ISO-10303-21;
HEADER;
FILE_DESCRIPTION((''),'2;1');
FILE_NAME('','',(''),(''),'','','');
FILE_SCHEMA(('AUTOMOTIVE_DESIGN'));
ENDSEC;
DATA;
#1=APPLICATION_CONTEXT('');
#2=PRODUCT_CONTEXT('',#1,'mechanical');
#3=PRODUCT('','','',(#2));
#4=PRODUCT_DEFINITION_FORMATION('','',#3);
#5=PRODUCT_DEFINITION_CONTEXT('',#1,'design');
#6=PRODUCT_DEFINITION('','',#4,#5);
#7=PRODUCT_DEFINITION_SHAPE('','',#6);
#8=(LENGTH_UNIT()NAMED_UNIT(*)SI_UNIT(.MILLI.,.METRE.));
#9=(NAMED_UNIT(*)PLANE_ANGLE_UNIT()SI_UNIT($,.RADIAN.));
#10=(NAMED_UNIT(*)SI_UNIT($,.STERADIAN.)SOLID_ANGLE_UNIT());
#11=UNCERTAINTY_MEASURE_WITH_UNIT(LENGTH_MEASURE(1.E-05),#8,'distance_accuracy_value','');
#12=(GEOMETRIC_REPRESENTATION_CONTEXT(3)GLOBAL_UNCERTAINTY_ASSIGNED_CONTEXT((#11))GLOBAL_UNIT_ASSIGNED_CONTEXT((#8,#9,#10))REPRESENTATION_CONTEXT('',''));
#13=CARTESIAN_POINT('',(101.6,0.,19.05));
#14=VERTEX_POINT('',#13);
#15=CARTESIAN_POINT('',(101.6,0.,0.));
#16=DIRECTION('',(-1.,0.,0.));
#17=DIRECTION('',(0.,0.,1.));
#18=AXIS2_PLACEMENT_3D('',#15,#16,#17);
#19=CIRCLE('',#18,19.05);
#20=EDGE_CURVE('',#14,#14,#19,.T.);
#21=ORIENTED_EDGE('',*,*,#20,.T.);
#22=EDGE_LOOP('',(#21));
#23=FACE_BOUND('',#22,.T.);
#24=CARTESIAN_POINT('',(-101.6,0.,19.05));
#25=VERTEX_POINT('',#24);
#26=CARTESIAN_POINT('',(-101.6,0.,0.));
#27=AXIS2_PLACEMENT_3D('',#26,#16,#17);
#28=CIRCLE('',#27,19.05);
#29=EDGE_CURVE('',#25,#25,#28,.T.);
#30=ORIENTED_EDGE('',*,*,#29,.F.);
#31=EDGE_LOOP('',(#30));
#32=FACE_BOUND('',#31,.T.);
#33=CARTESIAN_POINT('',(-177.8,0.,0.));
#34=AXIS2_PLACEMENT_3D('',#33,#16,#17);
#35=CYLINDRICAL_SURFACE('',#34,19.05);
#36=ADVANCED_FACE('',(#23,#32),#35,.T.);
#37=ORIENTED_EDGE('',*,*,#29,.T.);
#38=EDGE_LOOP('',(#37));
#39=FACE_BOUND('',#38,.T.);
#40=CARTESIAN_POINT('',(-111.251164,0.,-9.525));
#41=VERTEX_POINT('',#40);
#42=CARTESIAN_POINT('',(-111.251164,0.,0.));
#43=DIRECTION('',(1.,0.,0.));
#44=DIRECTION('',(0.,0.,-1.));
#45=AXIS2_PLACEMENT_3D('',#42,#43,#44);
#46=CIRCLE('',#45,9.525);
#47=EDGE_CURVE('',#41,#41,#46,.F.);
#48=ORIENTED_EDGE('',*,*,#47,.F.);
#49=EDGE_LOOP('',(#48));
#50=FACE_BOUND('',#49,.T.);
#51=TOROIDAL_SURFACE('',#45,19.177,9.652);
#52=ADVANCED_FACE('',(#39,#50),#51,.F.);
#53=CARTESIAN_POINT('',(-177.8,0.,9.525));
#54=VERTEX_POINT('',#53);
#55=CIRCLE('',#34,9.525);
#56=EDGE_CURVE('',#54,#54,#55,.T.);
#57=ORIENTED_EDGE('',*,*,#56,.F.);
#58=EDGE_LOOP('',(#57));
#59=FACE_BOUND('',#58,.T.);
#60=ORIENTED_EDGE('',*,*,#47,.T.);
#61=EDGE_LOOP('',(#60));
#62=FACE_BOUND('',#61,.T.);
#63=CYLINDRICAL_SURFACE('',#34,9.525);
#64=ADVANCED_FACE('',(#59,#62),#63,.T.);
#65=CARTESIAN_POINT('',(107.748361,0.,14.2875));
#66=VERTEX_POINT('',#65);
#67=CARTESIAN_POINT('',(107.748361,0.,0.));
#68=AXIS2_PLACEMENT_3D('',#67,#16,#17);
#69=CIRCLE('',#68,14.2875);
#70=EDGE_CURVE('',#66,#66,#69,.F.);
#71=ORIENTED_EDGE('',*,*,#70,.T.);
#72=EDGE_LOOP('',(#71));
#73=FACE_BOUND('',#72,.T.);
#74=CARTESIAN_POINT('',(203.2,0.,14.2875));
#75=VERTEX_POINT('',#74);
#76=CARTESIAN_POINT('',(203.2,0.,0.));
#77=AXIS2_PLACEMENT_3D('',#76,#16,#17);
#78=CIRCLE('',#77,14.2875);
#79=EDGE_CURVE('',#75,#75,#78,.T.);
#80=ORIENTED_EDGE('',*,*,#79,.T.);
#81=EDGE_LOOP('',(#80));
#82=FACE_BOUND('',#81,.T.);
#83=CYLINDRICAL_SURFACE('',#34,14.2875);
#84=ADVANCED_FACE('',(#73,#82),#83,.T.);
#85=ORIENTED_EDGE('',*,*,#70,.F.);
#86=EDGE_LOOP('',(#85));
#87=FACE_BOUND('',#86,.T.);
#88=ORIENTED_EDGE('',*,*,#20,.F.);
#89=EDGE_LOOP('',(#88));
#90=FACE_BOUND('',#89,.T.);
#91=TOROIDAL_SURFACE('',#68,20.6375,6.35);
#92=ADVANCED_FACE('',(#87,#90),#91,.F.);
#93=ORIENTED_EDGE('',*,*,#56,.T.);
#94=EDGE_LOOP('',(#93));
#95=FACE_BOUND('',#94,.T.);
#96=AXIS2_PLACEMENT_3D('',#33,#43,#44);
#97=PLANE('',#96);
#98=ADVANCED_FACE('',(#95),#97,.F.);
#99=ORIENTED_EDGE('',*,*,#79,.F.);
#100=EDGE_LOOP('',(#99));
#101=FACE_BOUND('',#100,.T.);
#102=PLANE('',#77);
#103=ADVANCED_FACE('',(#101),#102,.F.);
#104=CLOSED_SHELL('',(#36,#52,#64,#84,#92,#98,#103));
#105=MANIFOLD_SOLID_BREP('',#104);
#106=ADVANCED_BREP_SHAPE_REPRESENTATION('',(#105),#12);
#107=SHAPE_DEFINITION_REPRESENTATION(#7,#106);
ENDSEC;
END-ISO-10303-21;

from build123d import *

# Parameters (mm, degrees)
FILLET1_R = 9.652
FILLET2_R = 6.35


with BuildPart() as part:
    # Sketch1 → Revolve3 (revolve)
    with BuildSketch(Plane.XY, mode=Mode.PRIVATE) as revolve3_sk:
        Polygon((-101.6, 19.05), (101.6, 19.05), (101.6, 14.2875), (203.2, 14.2875), (203.2, 0), (-177.8, 0), (-177.8, 9.525), (-101.6, 9.525), align=None)
    revolve(revolve3_sk.sketch.rotate(Axis((-177.8, 0, 0), (1, 0, 0)), 90), axis=Axis((-177.8, 0, 0), (1, 0, 0)))

    # Fillet1
    # the kernel refuses this fillet: 9.652 mm, written as the material it adds along each edge
    with BuildSketch(Plane(origin=(-101.6, 0, 0), x_dir=(0, 0, 1), z_dir=(0, 1, 0))) as fillet1_piece_1_section:
        with BuildLine():
            CenterArc((9.525 + FILLET1_R, -FILLET1_R), FILLET1_R, 90, 90)
            Line((9.525 + FILLET1_R, 0), (9.525, 0))
            Line((9.525, 0), (9.525, -FILLET1_R))
        make_face()
    fillet1_piece_1 = revolve(axis=Axis((-101.6, 0, 0), (1, 0, 0)), mode=Mode.PRIVATE)
    fillet1_piece_1 = fillet1_piece_1 & Plane(origin=(-104.387487572, 0, 0), x_dir=(0, 0, 1), z_dir=(1, 0, 0)) * Cylinder(19.05, 77, mode=Mode.PRIVATE)
    add(fillet1_piece_1)

    # Fillet2
    # the kernel refuses this fillet: 6.35 mm, written as the material it adds along each edge
    with BuildSketch(Plane(origin=(101.6, 0, 0), x_dir=(0, 0, 1), z_dir=(0, 1, 0))) as fillet2_piece_1:
        with BuildLine():
            CenterArc((20.6375, 6.148361062), FILLET2_R, 180, 75.522487814)
            Line((14.2875, 6.148361062), (14.1605, 6.148361062))
            Line((14.1605, 6.148361062), (14.1605, 0))
            Line((14.1605, 0), (14.2875, -0.127))
            ThreePointArc((14.2875, -0.127), (16.66875, -0.127), (19.01825, -0.122967221))
            Line((19.01825, -0.122967221), (19.05, 0))
        make_face()
    revolve(axis=Axis((101.6, 0, 0), (1, 0, 0)))


solid = part.part
